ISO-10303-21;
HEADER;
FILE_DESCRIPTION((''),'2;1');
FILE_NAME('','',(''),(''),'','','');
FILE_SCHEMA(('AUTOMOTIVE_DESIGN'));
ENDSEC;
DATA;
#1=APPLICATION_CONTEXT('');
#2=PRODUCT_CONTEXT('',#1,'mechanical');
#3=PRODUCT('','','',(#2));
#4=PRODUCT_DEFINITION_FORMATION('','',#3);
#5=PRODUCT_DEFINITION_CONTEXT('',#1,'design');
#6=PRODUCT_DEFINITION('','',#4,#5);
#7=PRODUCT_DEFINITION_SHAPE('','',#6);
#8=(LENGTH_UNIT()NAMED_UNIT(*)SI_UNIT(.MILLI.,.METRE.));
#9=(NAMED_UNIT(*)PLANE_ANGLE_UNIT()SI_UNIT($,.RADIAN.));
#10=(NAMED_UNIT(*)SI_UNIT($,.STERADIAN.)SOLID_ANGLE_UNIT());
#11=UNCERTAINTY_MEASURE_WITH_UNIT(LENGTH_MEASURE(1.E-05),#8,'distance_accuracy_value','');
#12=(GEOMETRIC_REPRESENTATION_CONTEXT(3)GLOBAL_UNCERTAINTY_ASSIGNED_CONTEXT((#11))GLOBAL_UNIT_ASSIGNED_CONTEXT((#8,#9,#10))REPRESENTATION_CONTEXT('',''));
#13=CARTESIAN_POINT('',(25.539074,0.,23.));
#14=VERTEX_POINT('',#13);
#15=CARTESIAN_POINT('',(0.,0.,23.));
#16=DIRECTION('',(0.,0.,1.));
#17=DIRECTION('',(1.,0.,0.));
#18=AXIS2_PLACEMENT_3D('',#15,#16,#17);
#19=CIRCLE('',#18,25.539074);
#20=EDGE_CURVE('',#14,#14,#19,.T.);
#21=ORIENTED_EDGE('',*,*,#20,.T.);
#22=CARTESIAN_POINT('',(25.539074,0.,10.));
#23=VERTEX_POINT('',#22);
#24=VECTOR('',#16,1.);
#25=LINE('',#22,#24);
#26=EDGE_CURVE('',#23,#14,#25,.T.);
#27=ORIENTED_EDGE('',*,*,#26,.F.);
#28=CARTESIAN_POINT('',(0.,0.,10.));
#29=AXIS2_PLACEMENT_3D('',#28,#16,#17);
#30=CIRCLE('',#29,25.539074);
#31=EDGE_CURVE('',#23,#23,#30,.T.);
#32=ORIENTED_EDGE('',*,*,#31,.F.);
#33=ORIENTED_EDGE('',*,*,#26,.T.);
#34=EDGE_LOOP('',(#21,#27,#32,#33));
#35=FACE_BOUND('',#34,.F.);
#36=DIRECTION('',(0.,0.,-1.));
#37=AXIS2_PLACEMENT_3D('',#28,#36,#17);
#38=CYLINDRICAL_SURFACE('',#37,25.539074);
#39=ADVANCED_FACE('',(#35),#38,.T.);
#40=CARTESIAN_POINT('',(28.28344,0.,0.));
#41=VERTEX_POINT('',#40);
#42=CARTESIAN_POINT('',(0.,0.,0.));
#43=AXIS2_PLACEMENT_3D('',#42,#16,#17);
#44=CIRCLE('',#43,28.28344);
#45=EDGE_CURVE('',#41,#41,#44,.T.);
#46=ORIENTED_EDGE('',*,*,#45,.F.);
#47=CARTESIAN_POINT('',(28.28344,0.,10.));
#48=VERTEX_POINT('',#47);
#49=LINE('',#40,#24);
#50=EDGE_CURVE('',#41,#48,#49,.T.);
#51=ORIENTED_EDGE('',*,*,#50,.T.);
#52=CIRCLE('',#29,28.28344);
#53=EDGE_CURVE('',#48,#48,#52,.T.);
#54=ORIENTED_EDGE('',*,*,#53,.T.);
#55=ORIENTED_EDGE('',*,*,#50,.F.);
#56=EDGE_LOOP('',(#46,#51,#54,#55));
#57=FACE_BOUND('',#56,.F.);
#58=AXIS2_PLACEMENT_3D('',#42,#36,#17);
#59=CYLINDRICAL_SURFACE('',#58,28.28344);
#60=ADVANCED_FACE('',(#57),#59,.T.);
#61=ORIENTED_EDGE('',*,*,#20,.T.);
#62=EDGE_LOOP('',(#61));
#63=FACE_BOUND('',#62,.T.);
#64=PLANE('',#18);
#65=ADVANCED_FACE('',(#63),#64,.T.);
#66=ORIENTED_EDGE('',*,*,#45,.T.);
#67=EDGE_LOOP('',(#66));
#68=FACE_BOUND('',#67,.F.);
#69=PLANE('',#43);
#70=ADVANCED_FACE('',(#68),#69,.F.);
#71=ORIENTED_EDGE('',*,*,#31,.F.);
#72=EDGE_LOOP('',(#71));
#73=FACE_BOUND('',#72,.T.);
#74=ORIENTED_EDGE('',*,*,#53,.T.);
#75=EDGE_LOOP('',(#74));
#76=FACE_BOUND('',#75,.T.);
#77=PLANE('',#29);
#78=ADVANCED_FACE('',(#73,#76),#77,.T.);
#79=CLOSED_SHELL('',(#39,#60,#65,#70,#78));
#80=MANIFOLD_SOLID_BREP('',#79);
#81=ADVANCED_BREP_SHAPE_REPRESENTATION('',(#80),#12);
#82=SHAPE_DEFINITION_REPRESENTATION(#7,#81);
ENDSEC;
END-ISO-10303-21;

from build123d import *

# Parameters (mm, degrees)
F0_R     = 28.2834401036
F1_DEPTH = 10
F2_R     = 25.5390736026
F3_DEPTH = 13


# Not quite as in the source:
# - a feature of the source that left no trace in its solid (it failed there, or was rolled back) is left out


with BuildPart() as f1:
    # F0 (on Top) → F1 (new body)
    with BuildSketch(Plane.XY):
        Circle(F0_R)
    extrude(amount=F1_DEPTH)

    # F2 (on face) → F3 (join)
    with BuildSketch(Plane.XY.offset(10)):
        Circle(F2_R)
    extrude(amount=F3_DEPTH)


solid = f1.part
